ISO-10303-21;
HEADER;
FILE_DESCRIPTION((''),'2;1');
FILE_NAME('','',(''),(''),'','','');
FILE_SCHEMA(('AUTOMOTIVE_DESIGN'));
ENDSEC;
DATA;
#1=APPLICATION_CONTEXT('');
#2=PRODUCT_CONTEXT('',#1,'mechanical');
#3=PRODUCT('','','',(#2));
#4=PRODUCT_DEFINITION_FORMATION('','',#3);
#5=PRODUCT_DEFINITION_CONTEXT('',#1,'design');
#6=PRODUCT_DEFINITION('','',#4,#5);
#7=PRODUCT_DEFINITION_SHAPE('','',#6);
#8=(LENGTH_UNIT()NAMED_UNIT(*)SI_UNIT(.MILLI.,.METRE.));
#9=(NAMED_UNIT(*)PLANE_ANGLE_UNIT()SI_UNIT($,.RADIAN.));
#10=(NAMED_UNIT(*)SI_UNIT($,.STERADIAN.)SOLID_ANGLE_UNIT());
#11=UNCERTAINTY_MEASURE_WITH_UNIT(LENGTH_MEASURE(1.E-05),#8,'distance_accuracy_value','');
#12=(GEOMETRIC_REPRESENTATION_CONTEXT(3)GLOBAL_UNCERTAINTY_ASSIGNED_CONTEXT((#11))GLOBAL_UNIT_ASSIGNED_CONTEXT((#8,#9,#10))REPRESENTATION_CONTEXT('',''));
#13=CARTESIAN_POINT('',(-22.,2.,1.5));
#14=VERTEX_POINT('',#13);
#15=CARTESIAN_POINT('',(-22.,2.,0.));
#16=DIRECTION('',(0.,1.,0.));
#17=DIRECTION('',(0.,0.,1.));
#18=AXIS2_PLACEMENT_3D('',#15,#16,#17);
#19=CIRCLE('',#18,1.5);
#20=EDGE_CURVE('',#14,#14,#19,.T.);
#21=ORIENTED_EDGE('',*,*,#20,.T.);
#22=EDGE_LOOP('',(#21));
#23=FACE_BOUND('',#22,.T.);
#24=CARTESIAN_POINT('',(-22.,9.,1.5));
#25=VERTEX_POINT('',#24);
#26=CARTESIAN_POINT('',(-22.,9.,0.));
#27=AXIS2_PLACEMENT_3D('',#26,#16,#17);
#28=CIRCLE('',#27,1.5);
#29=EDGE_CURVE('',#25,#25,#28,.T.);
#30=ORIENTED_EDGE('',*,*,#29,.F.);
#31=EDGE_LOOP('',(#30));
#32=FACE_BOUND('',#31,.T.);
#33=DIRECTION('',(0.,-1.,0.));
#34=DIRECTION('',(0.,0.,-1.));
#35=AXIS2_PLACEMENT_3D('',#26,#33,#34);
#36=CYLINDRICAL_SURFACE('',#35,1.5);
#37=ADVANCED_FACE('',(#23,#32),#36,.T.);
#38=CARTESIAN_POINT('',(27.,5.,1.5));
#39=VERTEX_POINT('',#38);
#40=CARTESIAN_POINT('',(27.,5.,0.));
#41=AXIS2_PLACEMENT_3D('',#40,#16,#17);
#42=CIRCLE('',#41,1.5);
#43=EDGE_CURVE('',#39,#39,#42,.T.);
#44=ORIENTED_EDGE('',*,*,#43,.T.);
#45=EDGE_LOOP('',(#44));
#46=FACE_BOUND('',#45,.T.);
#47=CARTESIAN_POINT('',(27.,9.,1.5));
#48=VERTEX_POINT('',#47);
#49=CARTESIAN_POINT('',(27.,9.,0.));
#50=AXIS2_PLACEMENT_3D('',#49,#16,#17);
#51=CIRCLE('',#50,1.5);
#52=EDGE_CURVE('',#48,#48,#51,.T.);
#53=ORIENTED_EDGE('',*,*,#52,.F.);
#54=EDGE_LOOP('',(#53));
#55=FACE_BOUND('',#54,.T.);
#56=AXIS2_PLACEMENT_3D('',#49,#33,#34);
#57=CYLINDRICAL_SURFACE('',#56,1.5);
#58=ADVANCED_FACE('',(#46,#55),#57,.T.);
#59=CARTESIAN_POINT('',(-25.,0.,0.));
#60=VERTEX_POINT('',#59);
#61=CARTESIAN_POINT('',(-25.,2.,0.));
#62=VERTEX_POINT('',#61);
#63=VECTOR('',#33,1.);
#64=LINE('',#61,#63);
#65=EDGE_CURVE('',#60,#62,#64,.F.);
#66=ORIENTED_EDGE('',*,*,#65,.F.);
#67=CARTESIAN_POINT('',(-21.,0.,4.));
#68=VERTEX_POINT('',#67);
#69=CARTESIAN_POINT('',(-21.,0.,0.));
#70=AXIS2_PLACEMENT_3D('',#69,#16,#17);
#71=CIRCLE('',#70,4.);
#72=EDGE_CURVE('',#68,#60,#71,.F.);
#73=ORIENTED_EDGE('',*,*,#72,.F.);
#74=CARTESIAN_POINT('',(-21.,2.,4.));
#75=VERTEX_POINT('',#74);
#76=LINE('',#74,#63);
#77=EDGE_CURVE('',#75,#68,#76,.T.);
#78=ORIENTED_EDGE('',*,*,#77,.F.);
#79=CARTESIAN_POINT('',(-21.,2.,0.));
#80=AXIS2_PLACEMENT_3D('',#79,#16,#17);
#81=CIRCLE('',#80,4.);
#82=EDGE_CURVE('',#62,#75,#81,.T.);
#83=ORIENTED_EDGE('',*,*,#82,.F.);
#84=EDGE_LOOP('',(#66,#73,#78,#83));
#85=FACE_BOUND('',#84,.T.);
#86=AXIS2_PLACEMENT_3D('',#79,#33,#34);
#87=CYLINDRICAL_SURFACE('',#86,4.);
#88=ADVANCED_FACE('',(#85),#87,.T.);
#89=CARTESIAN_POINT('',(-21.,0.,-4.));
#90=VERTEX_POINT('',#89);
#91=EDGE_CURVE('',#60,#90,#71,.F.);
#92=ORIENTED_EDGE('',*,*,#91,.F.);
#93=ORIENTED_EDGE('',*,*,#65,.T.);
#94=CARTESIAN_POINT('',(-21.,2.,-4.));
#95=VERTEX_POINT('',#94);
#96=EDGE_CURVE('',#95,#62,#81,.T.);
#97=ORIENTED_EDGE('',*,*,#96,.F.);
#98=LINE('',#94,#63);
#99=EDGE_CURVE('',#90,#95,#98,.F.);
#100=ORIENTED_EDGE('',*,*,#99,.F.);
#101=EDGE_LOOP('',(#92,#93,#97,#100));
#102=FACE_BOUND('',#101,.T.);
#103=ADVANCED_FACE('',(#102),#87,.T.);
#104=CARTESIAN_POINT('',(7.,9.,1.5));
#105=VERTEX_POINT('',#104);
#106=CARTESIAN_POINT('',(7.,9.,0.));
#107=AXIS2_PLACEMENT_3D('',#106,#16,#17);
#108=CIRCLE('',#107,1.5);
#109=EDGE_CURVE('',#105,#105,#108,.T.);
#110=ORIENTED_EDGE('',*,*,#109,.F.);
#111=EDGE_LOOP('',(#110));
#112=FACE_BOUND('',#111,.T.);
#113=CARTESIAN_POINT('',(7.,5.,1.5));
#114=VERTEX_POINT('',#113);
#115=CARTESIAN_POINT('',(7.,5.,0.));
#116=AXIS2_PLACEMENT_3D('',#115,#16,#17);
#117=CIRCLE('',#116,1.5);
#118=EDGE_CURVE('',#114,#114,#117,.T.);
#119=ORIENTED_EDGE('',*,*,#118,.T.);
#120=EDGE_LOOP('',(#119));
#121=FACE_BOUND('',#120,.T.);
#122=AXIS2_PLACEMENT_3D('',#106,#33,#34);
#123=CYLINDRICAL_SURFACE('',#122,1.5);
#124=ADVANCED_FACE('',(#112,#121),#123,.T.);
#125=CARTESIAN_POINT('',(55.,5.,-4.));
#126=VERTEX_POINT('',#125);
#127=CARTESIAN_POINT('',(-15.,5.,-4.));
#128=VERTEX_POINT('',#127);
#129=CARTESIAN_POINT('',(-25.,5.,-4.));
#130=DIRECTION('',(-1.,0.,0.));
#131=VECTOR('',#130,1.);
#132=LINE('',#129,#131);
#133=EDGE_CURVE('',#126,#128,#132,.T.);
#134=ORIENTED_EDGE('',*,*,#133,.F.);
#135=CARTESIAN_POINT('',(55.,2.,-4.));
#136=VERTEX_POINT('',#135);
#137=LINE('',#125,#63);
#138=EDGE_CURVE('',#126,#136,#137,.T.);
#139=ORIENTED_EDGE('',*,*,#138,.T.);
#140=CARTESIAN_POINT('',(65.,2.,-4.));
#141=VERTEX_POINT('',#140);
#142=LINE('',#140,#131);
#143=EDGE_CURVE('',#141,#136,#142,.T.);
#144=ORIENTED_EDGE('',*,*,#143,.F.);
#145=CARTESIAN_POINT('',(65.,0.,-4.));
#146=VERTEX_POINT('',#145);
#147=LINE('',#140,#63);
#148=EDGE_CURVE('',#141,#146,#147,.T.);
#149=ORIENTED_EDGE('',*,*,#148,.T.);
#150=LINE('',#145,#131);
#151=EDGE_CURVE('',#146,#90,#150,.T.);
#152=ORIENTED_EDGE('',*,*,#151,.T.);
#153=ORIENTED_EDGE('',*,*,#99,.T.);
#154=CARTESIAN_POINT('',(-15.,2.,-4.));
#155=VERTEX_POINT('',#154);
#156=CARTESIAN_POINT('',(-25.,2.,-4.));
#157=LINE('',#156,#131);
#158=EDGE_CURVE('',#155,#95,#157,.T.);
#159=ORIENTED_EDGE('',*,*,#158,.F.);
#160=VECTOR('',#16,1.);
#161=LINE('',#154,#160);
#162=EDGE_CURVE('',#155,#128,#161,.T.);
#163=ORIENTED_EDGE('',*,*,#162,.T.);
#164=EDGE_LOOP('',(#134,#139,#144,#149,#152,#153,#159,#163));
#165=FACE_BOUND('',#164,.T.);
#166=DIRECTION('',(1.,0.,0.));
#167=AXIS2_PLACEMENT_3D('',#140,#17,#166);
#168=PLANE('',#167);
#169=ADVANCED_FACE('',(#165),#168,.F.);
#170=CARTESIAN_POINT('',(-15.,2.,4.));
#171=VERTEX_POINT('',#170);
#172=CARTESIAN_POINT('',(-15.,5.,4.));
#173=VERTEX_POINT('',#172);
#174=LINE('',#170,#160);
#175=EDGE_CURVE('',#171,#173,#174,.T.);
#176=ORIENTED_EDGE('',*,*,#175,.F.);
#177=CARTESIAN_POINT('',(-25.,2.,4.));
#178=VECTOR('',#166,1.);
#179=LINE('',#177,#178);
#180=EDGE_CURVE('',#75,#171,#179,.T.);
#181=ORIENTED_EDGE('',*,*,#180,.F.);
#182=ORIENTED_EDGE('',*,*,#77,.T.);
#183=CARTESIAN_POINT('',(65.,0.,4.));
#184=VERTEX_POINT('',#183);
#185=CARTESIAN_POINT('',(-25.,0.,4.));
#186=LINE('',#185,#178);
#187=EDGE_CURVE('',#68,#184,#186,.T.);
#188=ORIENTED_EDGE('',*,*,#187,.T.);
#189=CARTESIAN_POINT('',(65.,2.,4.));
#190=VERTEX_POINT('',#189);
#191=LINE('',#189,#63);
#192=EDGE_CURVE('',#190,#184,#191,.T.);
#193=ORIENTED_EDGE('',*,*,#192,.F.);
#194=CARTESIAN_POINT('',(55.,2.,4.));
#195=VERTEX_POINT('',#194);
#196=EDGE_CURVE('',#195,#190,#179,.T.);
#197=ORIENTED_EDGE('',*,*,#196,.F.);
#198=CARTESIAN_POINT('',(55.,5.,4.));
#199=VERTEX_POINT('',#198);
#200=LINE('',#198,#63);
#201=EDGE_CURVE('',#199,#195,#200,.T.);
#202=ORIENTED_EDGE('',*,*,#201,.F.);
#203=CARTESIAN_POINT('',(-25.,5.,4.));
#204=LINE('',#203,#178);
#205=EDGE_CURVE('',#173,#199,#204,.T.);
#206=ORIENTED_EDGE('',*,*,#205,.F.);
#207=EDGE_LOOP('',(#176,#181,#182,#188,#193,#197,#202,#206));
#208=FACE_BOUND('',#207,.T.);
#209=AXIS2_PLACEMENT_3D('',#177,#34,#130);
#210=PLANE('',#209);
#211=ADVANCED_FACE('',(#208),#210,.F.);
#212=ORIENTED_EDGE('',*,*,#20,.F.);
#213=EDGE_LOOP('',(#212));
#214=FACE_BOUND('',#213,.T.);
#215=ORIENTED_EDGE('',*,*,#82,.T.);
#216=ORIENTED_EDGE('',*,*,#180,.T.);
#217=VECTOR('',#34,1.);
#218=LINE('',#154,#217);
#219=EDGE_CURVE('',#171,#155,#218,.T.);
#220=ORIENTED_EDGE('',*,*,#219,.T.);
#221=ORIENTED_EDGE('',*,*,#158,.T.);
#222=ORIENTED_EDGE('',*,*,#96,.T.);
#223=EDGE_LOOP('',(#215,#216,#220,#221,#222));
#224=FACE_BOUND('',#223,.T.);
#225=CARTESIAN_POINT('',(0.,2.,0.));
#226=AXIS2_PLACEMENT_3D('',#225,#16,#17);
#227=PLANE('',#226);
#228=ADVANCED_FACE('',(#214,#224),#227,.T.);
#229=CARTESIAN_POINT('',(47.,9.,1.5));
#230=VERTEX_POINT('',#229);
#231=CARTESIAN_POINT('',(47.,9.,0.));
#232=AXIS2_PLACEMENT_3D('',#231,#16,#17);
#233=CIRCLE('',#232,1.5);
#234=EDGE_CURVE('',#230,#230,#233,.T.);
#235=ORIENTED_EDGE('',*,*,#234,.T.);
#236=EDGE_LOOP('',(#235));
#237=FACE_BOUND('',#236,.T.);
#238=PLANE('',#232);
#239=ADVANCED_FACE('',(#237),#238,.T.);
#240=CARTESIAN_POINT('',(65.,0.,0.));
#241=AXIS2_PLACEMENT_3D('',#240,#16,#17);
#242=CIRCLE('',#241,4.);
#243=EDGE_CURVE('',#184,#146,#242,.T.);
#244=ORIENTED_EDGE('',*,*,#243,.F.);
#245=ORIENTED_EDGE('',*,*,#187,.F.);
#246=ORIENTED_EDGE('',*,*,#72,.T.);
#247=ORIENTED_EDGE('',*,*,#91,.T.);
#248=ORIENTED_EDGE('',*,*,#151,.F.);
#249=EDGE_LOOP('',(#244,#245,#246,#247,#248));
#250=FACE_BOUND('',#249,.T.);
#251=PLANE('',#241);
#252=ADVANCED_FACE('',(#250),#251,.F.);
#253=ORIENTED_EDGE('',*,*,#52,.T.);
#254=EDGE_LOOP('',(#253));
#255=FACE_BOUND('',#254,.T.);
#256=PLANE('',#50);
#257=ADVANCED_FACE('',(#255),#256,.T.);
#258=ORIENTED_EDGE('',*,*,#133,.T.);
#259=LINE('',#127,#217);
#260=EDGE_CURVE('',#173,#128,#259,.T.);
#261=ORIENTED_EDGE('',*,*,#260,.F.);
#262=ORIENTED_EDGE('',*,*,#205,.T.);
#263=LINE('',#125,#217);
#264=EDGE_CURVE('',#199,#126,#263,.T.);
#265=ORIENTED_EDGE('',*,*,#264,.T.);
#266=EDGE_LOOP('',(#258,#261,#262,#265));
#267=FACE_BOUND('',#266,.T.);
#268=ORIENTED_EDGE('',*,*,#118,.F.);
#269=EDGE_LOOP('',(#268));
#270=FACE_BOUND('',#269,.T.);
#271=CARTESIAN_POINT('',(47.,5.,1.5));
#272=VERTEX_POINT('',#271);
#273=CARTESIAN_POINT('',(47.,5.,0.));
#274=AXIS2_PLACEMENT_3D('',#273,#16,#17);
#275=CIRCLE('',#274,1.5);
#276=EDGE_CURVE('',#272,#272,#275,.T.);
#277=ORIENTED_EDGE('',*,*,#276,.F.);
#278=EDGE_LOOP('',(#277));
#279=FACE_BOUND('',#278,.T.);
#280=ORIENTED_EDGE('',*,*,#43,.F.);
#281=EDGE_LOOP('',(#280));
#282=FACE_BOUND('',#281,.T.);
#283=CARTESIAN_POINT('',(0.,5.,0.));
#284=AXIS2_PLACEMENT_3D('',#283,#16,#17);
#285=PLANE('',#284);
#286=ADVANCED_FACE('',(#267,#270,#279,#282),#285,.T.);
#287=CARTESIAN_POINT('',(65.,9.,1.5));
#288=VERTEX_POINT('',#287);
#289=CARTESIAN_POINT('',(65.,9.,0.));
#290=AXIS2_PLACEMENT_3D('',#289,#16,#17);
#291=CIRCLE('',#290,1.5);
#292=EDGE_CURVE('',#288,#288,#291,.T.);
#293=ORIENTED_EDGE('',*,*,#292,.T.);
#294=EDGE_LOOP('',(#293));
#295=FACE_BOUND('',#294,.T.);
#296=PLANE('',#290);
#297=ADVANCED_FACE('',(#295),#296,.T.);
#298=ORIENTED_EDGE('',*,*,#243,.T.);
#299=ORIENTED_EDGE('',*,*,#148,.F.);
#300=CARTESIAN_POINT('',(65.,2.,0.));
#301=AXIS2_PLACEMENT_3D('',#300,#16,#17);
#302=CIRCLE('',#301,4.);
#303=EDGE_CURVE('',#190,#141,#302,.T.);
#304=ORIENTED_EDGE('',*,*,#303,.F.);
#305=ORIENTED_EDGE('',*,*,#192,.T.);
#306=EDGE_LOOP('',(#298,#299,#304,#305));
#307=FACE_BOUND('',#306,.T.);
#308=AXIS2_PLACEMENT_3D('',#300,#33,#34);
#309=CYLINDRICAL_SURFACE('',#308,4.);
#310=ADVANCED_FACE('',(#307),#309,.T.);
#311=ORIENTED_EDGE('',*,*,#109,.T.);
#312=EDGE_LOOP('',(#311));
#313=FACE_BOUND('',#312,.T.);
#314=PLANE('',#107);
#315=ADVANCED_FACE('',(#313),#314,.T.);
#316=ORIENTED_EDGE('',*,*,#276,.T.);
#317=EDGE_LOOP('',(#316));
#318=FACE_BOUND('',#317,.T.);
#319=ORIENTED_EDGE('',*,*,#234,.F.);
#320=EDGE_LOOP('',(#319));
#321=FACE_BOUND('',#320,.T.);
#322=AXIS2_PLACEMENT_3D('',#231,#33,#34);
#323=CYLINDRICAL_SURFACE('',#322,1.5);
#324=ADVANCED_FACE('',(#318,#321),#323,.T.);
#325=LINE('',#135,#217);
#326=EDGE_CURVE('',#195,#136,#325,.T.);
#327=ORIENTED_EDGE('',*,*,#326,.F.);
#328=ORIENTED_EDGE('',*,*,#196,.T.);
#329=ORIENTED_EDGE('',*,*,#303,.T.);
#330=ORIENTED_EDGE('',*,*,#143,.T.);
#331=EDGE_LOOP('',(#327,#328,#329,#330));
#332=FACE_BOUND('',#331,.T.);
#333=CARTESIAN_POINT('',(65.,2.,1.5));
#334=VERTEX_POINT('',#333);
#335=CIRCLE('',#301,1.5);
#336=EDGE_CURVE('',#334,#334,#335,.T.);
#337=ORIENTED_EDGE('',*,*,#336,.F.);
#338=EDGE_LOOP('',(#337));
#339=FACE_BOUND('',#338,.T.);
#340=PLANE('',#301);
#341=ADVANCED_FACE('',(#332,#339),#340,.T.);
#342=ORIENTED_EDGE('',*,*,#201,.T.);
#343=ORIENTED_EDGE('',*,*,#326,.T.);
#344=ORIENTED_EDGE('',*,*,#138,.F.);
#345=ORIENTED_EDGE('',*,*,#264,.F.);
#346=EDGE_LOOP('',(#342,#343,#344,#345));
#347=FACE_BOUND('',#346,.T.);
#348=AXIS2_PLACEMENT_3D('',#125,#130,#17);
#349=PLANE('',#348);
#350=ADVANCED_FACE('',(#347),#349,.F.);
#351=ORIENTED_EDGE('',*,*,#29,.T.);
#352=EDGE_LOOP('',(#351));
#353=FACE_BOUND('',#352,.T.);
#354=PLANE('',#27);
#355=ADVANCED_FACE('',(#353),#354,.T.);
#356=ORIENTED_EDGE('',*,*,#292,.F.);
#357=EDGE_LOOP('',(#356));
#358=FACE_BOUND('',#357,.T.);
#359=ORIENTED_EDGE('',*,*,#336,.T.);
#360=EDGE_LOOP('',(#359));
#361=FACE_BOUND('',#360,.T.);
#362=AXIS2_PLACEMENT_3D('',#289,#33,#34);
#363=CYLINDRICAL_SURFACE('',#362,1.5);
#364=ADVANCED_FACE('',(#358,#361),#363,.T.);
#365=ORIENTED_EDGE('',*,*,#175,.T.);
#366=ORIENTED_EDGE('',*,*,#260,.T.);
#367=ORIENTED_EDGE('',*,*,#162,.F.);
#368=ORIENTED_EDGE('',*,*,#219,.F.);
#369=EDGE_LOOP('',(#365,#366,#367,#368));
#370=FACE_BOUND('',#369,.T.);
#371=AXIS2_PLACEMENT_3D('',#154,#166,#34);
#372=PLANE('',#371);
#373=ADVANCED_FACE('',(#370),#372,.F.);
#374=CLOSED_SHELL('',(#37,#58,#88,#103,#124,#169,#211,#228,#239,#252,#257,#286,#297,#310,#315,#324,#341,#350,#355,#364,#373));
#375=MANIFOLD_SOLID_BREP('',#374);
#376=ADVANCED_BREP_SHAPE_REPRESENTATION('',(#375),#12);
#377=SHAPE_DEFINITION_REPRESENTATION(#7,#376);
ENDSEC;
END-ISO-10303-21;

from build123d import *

# Parameters (mm, degrees)
BOSS_EXTRUDE2_DEPTH = 2
SKETCH3_W           = 80
SKETCH3_H           = 8
BOSS_EXTRUDE3_DEPTH = 3
SKETCH4_R           = 1.5
BOSS_EXTRUDE4_DEPTH = 7
SKETCH12_R          = 1.5
BOSS_EXTRUDE6_DEPTH = 4
SKETCH14_W          = 10
SKETCH14_H          = 8
CUT_EXTRUDE1_DEPTH  = 3
SKETCH15_R          = 1.5
BOSS_EXTRUDE7_DEPTH = 7
FILLET1_R           = 4


with BuildPart() as part:
    # Sketch1 → Boss-Extrude2 (new body)
    with BuildSketch(Plane(origin=(0, 0, 0), x_dir=(1, 0, 0), z_dir=(0, 1, 0))):
        with BuildLine():
            Line((-25, -4), (65, -4))
            ThreePointArc((65, -4), (69, 0), (65, 4))
            Line((65, 4), (-25, 4))
            Line((-25, 4), (-25, -4))
        make_face()
    extrude(amount=BOSS_EXTRUDE2_DEPTH)

    # Sketch3 → Boss-Extrude3 (add)
    with BuildSketch(Plane(origin=(0, 2, 0), x_dir=(1, 0, 0), z_dir=(0, 1, 0))):
        with Locations((15, 0)):
            Rectangle(SKETCH3_W, SKETCH3_H)
    extrude(amount=BOSS_EXTRUDE3_DEPTH)

    # Sketch4 → Boss-Extrude4 (add)
    with BuildSketch(Plane(origin=(0, 2, 0), x_dir=(1, 0, 0), z_dir=(0, 1, 0))):
        with Locations(Location((65, 0, 0), (0, 0, 270))):
            Circle(SKETCH4_R)
    extrude(amount=BOSS_EXTRUDE4_DEPTH)

    # Sketch12 → Boss-Extrude6 (add)
    with BuildSketch(Plane(origin=(0, 5, 0), x_dir=(1, 0, 0), z_dir=(0, 1, 0))):
        with Locations(Location((47, 0, 0), (0, 0, 270))):
            Circle(SKETCH12_R)
        with Locations(Location((27, 0, 0), (0, 0, 270))):
            Circle(SKETCH12_R)
        with Locations(Location((7, 0, 0), (0, 0, 270))):
            Circle(SKETCH12_R)
    extrude(amount=BOSS_EXTRUDE6_DEPTH)

    # Sketch14 → Cut-Extrude1 (cut)
    with BuildSketch(Plane(origin=(0, 5, 0), x_dir=(1, 0, 0), z_dir=(0, 1, 0))):
        with Locations((-20, 0)):
            Rectangle(SKETCH14_W, SKETCH14_H)
    extrude(amount=-CUT_EXTRUDE1_DEPTH, mode=Mode.SUBTRACT)

    # Sketch15 → Boss-Extrude7 (add)
    with BuildSketch(Plane(origin=(0, 2, 0), x_dir=(1, 0, 0), z_dir=(0, 1, 0))):
        with Locations(Location((-22, 0, 0), (0, 0, 270))):
            Circle(SKETCH15_R)
    extrude(amount=BOSS_EXTRUDE7_DEPTH)

    # Fillet1
    fillet1_edges = [part.edges().sort_by_distance(p)[0] for p in [
        (-25, 1, -4),
        (-25, 1, 4),
    ]]
    fillet(fillet1_edges, radius=FILLET1_R - 0.0001)  # a hair under: the kernel refuses the full size


solid = part.part
